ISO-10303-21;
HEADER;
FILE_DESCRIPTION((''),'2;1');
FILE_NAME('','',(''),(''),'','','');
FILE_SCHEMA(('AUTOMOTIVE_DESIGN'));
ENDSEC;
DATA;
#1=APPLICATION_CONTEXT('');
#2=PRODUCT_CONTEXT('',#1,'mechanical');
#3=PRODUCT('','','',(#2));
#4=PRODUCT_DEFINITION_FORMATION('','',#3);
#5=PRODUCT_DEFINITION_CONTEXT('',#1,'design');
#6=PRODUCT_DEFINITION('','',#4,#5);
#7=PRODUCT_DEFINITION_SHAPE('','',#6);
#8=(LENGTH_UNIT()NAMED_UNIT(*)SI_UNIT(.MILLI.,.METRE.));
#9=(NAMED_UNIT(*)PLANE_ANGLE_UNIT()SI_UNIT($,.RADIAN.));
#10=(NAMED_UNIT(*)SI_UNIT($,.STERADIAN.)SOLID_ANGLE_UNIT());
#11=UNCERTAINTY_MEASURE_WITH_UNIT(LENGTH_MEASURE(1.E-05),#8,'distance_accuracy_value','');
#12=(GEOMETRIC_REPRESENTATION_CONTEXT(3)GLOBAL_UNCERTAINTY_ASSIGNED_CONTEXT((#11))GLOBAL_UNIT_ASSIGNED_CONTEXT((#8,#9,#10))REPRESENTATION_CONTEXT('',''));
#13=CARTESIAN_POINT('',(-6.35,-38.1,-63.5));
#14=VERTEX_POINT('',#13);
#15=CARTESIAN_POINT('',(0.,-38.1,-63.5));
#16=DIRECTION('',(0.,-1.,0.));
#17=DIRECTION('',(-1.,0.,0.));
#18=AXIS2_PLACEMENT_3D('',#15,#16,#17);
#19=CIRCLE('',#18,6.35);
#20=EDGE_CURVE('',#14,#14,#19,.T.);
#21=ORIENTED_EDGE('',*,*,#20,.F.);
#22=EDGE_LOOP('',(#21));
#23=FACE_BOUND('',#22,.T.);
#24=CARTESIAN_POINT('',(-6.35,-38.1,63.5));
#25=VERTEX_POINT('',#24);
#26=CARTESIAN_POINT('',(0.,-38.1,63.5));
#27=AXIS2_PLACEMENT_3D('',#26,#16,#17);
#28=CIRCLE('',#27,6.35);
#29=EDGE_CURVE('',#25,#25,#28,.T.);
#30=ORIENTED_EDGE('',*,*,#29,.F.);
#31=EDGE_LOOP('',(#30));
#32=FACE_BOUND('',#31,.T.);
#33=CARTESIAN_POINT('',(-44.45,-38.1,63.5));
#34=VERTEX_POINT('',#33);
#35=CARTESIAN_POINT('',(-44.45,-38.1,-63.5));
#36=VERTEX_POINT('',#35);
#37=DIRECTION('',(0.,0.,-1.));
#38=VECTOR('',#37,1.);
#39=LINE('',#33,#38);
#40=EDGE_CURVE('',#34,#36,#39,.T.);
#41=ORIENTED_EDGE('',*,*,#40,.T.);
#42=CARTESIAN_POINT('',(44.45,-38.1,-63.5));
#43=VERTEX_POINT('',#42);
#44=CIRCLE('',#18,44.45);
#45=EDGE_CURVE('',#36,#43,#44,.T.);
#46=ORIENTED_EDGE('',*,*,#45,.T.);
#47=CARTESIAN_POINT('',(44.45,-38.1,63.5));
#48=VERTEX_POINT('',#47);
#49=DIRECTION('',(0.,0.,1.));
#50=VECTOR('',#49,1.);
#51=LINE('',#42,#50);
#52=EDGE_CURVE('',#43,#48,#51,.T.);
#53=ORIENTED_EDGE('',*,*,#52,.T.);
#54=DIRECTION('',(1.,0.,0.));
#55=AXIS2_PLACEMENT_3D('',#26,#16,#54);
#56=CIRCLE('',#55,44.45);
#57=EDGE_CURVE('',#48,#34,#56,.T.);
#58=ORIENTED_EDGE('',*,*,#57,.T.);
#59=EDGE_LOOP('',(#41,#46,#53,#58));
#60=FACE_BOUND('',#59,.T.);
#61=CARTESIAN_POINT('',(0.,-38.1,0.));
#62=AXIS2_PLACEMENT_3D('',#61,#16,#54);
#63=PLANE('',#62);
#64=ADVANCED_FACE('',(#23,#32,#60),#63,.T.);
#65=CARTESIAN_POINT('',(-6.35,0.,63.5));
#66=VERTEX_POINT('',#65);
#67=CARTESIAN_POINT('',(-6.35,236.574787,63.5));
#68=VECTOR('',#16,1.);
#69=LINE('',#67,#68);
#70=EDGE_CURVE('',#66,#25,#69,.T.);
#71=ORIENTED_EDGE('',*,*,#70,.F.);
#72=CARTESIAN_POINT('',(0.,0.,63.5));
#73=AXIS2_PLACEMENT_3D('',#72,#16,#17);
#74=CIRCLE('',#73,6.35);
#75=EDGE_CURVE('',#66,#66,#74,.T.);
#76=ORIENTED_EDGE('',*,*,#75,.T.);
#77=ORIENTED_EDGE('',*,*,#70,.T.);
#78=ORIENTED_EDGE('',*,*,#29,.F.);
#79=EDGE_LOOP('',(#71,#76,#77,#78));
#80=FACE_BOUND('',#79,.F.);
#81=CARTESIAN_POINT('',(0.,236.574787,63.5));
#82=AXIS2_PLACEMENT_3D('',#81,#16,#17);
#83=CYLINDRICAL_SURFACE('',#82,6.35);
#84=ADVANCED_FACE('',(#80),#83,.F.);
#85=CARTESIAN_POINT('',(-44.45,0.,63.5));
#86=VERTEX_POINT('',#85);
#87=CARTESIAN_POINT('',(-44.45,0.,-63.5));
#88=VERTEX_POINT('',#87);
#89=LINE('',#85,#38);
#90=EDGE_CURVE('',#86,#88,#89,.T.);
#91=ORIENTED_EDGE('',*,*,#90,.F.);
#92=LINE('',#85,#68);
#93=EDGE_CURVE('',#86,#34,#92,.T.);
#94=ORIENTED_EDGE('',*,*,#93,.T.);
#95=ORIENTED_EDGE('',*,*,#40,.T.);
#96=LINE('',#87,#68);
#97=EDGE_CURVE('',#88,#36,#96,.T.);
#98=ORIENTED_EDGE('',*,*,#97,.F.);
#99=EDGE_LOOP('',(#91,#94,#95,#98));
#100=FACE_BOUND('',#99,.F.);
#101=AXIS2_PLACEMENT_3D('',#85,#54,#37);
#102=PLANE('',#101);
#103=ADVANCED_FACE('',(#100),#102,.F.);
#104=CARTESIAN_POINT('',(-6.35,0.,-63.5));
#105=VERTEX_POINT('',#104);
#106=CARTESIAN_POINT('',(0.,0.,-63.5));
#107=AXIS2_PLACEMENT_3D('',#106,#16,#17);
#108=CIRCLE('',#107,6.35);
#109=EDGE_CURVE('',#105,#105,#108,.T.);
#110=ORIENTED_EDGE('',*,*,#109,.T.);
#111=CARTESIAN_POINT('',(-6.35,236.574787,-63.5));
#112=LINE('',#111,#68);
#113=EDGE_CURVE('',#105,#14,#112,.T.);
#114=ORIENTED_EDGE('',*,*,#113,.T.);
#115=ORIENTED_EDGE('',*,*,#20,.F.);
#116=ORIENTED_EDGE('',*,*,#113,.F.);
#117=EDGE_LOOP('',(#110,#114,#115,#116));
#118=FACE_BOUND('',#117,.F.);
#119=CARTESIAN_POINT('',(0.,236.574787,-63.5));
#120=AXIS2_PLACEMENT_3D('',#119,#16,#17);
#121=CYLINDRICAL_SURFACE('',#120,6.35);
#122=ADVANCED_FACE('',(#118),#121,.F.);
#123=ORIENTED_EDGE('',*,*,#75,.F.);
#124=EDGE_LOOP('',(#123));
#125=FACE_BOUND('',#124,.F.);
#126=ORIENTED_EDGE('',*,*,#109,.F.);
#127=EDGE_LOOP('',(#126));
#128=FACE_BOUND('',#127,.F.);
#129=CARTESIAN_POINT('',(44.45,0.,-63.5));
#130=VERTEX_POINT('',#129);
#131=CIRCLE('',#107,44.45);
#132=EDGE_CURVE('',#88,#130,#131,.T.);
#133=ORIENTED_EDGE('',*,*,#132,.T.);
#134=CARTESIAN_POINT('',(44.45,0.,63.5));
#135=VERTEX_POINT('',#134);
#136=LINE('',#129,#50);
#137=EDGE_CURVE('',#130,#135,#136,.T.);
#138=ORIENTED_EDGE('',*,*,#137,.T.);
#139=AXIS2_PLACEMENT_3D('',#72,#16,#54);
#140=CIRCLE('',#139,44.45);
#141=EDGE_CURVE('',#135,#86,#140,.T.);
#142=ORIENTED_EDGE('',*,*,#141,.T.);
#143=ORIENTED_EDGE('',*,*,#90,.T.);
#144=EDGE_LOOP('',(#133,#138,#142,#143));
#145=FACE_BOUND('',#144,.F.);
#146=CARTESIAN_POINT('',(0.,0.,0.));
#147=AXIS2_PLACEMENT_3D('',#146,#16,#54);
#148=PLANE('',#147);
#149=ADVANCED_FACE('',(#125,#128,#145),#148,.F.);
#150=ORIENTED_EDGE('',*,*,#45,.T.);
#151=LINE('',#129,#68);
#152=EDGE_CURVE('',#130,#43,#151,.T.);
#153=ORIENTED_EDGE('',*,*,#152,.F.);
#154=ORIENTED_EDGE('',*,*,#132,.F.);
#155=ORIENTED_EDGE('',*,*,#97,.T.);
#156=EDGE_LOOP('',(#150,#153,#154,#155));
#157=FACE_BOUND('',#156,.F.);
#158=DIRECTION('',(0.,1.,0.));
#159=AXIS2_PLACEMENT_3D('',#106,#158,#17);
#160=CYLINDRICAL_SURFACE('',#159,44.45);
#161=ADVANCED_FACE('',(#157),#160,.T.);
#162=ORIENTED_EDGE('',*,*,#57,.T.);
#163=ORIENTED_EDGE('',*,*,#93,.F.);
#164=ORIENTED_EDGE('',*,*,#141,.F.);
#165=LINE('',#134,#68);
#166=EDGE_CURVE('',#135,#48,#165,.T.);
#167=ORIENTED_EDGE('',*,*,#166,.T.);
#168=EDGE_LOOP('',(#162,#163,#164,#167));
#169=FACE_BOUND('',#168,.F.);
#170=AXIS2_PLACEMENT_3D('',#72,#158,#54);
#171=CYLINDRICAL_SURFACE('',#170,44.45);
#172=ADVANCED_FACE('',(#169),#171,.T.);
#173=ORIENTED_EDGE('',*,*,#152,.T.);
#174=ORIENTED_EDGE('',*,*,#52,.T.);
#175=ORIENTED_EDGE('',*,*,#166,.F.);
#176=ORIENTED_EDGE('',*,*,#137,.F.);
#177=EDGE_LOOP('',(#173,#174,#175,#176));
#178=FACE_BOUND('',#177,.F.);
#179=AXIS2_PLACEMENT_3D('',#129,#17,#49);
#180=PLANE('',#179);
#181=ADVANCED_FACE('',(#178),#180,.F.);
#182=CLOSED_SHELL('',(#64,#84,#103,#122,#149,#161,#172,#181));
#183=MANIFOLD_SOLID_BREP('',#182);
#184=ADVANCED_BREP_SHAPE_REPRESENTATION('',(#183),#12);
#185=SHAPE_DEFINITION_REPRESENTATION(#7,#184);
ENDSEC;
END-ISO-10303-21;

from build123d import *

# Parameters (mm, degrees)
F1_DEPTH = 38.1
F2_D     = 12.7


# Not quite as in the source:
# - a length typed as a fraction of an inch, garbled in the dataset ("3 / 203.2 mm" for 3/8 in), is restored


with BuildPart() as f1:
    # F0 (on Front) → F1 (new body)
    with BuildSketch(Plane.XZ):
        with BuildLine():
            Line((44.45, -63.5), (44.45, 63.5))
            ThreePointArc((44.45, 63.5), (0, 107.95), (-44.45, 63.5))
            Line((-44.45, 63.5), (-44.45, -63.5))
            ThreePointArc((-44.45, -63.5), (0, -107.95), (44.45, -63.5))
        make_face()
    extrude(amount=F1_DEPTH)

    # F2 (through all)
    with Locations(Plane(origin=(0, 0, 0), x_dir=(1, 0, 0), z_dir=(0, 1, 0))):
        with Locations((0, -63.5), (0, 63.5)):
            Hole(F2_D / 2)


solid = f1.part
